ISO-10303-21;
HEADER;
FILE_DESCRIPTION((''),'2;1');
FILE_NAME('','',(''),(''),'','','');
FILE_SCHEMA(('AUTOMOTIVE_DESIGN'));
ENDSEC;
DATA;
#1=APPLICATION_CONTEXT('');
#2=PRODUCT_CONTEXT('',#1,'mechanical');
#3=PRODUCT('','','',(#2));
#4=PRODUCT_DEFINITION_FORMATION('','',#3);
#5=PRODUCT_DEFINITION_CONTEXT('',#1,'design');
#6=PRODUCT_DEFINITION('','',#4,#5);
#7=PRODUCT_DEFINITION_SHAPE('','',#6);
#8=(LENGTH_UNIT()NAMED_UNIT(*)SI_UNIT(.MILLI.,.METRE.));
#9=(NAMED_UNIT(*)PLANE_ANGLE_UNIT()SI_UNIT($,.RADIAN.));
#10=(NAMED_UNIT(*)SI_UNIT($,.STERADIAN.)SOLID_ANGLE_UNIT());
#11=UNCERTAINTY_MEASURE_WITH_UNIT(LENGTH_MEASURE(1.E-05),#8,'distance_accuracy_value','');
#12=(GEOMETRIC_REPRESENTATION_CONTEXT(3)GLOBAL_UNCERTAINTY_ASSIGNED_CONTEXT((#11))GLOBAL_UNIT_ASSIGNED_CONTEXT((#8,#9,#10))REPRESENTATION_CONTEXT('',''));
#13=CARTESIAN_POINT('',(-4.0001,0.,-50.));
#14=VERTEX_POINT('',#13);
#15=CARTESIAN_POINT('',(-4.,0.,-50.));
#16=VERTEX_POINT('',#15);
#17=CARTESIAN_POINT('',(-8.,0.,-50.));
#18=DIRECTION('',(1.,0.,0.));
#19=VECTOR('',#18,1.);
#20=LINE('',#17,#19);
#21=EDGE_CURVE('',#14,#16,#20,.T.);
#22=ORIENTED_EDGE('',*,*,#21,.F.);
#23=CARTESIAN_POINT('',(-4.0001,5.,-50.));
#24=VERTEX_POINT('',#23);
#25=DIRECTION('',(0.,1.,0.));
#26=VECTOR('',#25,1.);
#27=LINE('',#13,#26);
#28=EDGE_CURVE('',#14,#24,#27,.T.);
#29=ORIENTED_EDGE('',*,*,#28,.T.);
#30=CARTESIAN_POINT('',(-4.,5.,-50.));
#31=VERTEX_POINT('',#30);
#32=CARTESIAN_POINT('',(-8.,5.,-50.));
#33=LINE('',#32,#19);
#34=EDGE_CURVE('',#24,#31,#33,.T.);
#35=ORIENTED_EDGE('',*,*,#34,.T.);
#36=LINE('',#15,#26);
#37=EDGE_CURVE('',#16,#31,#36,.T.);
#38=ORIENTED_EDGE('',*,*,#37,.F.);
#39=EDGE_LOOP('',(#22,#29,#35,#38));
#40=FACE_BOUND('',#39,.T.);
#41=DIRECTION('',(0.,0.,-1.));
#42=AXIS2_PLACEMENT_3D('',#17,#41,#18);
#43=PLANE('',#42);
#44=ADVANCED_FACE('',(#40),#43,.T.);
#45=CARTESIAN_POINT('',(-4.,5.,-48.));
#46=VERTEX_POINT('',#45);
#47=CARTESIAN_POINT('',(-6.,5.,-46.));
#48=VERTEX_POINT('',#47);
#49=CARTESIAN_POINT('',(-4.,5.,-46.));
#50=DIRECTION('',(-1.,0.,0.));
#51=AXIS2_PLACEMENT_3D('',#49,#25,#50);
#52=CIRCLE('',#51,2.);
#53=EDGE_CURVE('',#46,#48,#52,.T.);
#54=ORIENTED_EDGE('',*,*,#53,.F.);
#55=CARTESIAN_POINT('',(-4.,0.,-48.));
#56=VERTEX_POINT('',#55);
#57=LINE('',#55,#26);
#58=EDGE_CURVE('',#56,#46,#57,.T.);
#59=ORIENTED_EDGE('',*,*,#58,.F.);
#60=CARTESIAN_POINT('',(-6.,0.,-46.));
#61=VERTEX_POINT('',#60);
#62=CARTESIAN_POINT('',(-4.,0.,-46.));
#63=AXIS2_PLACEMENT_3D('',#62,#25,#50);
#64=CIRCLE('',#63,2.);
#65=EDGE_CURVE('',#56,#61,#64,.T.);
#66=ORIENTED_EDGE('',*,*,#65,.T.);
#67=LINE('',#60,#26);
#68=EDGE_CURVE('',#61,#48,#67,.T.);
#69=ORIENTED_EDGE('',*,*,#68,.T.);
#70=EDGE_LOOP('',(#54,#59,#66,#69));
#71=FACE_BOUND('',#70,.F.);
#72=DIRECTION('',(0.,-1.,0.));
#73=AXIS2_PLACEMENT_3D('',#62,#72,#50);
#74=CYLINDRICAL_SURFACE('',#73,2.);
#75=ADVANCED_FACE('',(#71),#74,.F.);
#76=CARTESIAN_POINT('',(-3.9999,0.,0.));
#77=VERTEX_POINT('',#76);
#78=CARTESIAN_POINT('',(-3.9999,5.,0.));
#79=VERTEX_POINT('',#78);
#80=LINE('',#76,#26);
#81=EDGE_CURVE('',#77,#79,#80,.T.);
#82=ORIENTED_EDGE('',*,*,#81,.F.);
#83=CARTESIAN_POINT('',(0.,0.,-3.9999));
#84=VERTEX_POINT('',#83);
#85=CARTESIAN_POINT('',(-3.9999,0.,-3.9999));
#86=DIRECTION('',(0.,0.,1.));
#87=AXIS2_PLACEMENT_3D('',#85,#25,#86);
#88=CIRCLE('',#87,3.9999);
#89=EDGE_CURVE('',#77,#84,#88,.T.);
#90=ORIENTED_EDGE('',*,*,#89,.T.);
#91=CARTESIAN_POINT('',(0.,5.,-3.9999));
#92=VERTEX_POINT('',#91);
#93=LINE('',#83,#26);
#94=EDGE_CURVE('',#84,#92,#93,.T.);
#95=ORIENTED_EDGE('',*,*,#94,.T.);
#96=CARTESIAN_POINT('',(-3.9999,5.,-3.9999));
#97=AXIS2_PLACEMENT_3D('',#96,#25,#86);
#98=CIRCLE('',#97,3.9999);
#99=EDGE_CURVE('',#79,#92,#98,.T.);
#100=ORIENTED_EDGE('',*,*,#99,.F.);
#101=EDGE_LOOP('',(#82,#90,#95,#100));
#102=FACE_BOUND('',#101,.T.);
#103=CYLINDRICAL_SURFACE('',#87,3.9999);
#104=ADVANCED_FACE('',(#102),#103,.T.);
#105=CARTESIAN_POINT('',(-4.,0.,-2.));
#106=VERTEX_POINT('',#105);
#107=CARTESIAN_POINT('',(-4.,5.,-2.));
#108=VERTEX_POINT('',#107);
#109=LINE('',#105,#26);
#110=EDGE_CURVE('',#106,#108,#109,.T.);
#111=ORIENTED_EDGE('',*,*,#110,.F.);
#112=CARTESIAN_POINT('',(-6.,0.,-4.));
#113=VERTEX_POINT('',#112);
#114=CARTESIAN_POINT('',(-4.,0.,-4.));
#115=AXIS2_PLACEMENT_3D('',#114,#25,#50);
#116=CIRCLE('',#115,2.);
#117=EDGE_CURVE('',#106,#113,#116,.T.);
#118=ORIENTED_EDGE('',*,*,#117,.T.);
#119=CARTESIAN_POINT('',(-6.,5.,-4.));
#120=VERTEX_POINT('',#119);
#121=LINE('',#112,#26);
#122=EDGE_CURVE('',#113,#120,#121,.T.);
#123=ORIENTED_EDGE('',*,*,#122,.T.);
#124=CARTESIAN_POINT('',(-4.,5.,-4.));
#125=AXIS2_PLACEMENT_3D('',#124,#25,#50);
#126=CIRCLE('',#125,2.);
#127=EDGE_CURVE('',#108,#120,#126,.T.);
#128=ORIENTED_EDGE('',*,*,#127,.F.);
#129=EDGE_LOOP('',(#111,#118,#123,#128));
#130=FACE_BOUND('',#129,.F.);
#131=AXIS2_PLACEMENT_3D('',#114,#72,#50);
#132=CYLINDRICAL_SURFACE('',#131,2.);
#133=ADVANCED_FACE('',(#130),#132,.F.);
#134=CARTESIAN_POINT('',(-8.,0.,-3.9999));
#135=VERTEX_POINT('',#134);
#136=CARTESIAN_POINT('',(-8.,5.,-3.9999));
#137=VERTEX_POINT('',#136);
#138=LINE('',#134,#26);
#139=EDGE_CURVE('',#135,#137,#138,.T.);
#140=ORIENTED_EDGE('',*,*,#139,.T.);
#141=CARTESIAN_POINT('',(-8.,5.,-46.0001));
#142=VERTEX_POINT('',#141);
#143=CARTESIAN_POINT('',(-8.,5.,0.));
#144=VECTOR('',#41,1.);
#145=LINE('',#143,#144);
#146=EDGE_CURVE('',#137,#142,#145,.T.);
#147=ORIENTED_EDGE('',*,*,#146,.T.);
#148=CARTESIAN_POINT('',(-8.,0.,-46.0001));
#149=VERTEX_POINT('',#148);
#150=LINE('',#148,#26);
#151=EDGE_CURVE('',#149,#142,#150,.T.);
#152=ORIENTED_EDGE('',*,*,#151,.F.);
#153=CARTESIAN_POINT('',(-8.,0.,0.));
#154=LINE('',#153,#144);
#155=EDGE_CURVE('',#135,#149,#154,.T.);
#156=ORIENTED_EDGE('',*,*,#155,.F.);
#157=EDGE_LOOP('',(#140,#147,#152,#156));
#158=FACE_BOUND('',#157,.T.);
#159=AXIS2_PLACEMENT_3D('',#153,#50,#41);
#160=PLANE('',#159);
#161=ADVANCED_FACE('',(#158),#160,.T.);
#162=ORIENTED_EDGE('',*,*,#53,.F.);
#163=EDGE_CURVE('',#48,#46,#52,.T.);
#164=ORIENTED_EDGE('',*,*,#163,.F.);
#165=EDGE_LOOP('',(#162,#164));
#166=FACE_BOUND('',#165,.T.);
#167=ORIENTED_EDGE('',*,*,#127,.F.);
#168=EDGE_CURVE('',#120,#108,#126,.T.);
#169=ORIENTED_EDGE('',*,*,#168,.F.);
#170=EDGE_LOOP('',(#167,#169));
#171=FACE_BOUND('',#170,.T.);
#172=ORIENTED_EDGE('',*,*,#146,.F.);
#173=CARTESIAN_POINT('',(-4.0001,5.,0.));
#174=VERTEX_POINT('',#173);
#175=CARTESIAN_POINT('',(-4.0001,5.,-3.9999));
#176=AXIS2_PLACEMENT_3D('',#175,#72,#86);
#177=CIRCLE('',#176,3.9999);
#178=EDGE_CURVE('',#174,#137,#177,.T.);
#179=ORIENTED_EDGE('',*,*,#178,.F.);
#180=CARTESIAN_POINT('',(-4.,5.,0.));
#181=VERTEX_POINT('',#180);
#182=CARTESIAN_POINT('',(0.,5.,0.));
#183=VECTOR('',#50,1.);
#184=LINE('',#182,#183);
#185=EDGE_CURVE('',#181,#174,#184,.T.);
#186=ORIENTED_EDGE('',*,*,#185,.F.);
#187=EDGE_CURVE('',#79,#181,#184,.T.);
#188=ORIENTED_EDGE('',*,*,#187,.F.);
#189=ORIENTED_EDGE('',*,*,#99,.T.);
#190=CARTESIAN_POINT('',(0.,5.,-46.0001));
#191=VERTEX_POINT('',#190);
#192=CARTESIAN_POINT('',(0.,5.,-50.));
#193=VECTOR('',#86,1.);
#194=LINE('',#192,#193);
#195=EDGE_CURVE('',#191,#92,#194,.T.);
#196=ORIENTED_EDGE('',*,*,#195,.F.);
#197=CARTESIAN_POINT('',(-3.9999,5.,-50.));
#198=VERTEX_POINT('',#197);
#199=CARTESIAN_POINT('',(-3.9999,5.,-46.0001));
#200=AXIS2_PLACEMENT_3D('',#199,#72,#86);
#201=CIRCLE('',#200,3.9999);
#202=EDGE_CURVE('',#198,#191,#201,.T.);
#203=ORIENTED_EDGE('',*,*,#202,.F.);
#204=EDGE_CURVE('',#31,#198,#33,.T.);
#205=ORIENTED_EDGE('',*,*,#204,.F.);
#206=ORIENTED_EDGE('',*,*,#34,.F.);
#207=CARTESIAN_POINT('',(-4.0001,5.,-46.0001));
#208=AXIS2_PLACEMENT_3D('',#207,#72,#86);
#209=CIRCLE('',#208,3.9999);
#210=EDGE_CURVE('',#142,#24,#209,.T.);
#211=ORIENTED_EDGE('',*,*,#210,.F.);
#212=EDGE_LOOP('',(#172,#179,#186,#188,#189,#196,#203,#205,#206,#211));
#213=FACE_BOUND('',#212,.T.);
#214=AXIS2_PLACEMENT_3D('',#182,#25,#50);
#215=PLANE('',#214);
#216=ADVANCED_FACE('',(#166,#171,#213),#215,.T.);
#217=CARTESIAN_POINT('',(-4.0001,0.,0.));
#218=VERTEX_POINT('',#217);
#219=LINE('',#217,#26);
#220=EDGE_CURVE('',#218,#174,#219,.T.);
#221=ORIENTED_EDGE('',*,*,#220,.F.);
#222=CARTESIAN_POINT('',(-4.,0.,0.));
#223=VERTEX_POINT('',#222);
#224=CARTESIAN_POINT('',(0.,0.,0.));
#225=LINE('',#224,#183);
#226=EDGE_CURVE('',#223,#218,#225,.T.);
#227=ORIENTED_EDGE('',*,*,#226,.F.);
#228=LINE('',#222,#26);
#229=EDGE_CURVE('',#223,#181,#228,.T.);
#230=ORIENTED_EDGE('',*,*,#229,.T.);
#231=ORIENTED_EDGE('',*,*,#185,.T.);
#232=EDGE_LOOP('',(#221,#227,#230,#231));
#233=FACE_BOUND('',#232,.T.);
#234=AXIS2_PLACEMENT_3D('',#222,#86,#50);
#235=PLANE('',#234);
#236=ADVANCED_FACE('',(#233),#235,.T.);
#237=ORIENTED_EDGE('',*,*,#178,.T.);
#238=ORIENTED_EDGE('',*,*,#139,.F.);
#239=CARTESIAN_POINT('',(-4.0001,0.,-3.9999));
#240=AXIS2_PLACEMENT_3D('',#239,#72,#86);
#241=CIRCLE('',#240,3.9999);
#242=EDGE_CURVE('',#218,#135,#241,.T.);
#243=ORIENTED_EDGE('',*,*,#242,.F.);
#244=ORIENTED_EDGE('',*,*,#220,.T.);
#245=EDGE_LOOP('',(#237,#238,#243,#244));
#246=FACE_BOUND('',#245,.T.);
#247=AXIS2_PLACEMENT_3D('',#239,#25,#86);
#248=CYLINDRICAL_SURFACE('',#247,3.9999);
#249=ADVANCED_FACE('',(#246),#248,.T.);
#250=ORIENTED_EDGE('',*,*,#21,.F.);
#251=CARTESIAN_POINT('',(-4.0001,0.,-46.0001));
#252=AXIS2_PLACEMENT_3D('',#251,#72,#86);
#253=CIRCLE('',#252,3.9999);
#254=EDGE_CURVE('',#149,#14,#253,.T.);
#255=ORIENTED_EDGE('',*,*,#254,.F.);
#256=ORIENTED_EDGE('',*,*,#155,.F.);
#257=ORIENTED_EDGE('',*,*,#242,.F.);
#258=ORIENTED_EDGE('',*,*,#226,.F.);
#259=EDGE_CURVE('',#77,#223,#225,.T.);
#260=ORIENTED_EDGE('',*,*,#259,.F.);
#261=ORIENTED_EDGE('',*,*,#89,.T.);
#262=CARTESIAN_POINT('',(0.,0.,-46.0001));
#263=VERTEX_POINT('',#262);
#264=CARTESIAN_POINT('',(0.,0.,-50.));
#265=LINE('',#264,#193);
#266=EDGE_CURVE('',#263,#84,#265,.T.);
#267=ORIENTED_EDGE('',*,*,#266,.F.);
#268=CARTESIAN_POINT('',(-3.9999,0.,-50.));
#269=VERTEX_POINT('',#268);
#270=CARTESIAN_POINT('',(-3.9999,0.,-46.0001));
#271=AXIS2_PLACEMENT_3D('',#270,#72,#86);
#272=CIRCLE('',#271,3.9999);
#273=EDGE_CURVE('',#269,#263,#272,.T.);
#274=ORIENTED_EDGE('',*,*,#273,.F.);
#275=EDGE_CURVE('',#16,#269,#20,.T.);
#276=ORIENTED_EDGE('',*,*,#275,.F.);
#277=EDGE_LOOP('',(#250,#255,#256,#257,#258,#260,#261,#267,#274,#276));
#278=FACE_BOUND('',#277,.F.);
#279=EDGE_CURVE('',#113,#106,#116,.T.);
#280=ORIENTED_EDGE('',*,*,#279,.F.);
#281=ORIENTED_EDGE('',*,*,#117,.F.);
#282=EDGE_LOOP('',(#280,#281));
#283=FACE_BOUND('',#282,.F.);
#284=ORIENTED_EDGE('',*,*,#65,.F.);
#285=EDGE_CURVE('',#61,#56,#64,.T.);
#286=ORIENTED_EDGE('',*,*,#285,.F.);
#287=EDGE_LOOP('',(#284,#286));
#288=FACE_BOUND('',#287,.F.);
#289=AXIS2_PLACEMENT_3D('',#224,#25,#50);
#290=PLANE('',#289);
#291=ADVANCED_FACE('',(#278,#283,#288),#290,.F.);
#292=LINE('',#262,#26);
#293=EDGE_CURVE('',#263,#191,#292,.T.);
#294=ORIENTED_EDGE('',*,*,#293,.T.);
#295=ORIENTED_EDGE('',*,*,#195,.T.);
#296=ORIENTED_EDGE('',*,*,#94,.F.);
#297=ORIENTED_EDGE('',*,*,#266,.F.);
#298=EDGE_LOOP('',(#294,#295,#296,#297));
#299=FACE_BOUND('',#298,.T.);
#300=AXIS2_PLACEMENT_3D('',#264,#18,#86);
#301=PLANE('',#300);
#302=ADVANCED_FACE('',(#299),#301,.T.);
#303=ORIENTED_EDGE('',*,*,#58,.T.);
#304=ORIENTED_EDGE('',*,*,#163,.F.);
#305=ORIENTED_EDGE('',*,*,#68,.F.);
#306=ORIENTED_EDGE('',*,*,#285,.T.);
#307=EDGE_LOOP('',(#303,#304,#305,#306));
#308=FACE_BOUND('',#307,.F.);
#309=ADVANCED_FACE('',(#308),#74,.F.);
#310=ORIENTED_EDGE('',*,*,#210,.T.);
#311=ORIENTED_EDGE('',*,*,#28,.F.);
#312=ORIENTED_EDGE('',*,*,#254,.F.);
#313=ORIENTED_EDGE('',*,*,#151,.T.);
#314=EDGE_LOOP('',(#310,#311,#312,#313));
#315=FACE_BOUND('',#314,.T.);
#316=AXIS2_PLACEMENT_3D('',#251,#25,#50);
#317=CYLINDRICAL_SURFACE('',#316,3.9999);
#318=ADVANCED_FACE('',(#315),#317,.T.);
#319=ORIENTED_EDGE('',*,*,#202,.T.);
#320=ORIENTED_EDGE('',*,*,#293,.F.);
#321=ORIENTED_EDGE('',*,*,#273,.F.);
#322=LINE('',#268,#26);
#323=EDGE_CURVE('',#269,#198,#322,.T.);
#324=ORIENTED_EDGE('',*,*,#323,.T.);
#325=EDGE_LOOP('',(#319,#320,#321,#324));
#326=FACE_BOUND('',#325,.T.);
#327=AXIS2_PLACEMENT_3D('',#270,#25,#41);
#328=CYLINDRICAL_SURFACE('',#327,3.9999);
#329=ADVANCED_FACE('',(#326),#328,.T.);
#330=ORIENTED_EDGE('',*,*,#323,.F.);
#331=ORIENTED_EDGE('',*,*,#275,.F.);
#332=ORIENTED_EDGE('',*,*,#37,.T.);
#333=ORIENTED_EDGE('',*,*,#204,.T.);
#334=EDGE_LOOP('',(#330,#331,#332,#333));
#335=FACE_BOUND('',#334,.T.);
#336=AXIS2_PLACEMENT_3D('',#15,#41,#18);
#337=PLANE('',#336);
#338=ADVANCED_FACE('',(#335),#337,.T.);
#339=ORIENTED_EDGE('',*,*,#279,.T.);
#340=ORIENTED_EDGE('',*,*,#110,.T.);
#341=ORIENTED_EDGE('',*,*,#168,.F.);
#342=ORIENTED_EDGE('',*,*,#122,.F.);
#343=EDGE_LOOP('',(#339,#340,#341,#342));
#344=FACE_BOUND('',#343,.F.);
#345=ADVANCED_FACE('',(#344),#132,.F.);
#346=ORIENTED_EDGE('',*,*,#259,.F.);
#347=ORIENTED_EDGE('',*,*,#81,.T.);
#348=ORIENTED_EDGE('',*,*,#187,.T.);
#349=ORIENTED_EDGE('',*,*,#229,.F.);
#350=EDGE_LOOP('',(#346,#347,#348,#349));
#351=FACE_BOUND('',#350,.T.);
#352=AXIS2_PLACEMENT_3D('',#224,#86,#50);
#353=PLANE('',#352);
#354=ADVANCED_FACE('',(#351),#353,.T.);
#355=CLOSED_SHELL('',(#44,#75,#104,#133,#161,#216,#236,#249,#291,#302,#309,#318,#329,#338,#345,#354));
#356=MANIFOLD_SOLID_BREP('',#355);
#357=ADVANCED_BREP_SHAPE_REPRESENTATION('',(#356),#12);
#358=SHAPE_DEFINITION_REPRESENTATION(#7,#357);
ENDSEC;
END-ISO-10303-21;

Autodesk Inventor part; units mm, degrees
ref_plane "YZ Plane" through (0, 0, 0) normal (1, 0, 0) x (0, 1, 0)
ref_plane "XZ Plane" through (0, 0, 0) normal (0, 1, 0) x (-1, 0, 0)
ref_plane "XY Plane" through (0, 0, 0) normal (0, 0, 1) x (1, 0, 0)
sketch "Sketch1" plane through (0, 0, 0) normal (0, 1, 0) x (-1, 0, 0)
  line L0 (0, 0) -> (8, 0)
  line L1 (8, 0) -> (8, -50)
  line L2 (8, -50) -> (0, -50)
  line L3 (0, -50) -> (0, 0)
  line L4 (8, 0) -> (4, 0)
  line L5 (4, 0) -> (4, -4)
  circle A0 centre (4, -4) radius 2
  line L6 (8, -50) -> (4, -50)
  line L7 (4, -50) -> (4, -46)
  circle A1 centre (4, -46) radius 2
  dimension "d0" = 8
  dimension "d1" = 50
  dimension "d2" = 4
  dimension "d3" = 4
  dimension "d4" = 4
  dimension "d5" = 4
  dimension "d6" = 4
  dimension "d7" = 4
extrude "Extrusion1" add sketch "Sketch1" along normal blind 5
fillet "Fillet1" radius 4 4 edges at (0, 2.5, 0) (-8, 2.5, 0) (-8, 2.5, -50) (0, 2.5, -50)
properties part number "Bar2"
